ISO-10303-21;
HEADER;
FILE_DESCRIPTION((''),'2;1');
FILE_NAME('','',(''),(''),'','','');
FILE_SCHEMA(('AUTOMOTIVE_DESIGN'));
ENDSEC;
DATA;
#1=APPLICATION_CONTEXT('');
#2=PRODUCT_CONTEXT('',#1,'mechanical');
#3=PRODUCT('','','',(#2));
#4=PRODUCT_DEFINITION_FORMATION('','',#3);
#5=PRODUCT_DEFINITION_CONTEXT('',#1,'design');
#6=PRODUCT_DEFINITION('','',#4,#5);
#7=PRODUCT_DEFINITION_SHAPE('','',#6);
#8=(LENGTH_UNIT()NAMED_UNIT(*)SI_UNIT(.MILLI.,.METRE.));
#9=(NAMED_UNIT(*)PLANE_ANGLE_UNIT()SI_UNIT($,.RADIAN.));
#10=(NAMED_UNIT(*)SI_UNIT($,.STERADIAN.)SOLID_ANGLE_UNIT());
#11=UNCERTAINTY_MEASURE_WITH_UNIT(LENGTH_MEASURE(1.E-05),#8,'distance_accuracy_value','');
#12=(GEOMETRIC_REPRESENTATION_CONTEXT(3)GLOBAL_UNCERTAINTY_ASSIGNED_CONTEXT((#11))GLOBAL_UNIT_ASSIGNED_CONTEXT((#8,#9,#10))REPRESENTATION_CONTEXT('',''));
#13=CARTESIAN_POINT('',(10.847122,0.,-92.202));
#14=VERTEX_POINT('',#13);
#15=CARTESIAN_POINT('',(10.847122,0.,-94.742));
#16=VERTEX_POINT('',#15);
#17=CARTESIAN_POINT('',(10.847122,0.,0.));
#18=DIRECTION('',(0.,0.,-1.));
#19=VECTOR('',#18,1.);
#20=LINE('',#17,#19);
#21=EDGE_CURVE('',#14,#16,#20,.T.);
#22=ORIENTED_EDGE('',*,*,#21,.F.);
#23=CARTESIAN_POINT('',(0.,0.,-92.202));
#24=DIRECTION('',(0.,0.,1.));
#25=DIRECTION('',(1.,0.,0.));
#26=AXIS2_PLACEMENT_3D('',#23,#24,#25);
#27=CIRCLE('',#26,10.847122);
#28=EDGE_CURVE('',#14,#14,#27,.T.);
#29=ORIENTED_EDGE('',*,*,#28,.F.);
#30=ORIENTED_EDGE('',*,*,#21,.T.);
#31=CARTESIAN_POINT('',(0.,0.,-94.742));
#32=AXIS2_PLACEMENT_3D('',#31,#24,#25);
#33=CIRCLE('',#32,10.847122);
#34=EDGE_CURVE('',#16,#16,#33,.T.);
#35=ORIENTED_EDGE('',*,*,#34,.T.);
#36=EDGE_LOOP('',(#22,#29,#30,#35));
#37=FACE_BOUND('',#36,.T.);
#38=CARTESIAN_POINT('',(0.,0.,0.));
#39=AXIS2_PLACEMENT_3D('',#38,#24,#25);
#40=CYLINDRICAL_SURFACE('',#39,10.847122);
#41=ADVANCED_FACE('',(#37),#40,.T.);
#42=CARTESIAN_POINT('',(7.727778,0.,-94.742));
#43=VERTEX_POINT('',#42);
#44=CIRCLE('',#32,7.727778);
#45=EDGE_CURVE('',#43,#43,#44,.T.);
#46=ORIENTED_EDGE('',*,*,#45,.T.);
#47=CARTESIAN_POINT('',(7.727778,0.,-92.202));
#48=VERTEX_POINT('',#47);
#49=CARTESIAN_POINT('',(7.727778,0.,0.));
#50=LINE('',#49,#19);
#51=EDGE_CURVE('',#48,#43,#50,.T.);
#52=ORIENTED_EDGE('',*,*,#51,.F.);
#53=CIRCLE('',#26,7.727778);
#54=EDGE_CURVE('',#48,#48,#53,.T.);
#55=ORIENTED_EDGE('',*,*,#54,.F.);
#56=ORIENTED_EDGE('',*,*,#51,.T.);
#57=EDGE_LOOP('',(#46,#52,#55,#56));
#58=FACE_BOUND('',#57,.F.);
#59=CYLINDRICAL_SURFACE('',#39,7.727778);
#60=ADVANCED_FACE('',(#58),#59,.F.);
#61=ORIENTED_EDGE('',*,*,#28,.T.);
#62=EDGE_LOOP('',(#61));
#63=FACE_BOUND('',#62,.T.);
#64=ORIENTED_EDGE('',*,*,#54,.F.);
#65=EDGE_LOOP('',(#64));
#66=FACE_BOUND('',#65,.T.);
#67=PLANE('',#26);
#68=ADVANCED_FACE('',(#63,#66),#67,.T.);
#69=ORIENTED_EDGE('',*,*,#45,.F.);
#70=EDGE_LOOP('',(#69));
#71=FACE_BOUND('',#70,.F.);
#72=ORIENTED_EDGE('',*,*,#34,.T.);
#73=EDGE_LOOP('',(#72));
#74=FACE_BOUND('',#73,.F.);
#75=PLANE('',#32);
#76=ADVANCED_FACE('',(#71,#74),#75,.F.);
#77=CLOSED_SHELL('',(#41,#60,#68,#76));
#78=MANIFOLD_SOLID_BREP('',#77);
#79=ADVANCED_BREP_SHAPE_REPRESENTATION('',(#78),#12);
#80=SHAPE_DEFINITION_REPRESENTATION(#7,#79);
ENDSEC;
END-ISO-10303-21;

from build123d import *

# Parameters (mm, degrees)
F0_R     = 10.847122292
F0_R_2   = 7.7277782914
F1_DEPTH = 94.742
F3_T     = -2.54


# Not quite as in the source:
# - a feature names something its author has since deleted; it is built from what else it names


with BuildPart() as f1:
    # F0 (on Top) → F1 (new body)
    with BuildSketch(Plane.XY):
        Circle(F0_R)
        Circle(F0_R_2, mode=Mode.SUBTRACT)
    extrude(amount=-F1_DEPTH)

    # F3
    f3_openings = [f1.faces().sort_by_distance(p)[0] for p in [
        (-10.847122, 0, -47.371),
        (-10.540319, 0, 0),
        (-7.727778, 0, -47.371),
    ]]
    offset(amount=F3_T, openings=f3_openings)


solid = f1.part
